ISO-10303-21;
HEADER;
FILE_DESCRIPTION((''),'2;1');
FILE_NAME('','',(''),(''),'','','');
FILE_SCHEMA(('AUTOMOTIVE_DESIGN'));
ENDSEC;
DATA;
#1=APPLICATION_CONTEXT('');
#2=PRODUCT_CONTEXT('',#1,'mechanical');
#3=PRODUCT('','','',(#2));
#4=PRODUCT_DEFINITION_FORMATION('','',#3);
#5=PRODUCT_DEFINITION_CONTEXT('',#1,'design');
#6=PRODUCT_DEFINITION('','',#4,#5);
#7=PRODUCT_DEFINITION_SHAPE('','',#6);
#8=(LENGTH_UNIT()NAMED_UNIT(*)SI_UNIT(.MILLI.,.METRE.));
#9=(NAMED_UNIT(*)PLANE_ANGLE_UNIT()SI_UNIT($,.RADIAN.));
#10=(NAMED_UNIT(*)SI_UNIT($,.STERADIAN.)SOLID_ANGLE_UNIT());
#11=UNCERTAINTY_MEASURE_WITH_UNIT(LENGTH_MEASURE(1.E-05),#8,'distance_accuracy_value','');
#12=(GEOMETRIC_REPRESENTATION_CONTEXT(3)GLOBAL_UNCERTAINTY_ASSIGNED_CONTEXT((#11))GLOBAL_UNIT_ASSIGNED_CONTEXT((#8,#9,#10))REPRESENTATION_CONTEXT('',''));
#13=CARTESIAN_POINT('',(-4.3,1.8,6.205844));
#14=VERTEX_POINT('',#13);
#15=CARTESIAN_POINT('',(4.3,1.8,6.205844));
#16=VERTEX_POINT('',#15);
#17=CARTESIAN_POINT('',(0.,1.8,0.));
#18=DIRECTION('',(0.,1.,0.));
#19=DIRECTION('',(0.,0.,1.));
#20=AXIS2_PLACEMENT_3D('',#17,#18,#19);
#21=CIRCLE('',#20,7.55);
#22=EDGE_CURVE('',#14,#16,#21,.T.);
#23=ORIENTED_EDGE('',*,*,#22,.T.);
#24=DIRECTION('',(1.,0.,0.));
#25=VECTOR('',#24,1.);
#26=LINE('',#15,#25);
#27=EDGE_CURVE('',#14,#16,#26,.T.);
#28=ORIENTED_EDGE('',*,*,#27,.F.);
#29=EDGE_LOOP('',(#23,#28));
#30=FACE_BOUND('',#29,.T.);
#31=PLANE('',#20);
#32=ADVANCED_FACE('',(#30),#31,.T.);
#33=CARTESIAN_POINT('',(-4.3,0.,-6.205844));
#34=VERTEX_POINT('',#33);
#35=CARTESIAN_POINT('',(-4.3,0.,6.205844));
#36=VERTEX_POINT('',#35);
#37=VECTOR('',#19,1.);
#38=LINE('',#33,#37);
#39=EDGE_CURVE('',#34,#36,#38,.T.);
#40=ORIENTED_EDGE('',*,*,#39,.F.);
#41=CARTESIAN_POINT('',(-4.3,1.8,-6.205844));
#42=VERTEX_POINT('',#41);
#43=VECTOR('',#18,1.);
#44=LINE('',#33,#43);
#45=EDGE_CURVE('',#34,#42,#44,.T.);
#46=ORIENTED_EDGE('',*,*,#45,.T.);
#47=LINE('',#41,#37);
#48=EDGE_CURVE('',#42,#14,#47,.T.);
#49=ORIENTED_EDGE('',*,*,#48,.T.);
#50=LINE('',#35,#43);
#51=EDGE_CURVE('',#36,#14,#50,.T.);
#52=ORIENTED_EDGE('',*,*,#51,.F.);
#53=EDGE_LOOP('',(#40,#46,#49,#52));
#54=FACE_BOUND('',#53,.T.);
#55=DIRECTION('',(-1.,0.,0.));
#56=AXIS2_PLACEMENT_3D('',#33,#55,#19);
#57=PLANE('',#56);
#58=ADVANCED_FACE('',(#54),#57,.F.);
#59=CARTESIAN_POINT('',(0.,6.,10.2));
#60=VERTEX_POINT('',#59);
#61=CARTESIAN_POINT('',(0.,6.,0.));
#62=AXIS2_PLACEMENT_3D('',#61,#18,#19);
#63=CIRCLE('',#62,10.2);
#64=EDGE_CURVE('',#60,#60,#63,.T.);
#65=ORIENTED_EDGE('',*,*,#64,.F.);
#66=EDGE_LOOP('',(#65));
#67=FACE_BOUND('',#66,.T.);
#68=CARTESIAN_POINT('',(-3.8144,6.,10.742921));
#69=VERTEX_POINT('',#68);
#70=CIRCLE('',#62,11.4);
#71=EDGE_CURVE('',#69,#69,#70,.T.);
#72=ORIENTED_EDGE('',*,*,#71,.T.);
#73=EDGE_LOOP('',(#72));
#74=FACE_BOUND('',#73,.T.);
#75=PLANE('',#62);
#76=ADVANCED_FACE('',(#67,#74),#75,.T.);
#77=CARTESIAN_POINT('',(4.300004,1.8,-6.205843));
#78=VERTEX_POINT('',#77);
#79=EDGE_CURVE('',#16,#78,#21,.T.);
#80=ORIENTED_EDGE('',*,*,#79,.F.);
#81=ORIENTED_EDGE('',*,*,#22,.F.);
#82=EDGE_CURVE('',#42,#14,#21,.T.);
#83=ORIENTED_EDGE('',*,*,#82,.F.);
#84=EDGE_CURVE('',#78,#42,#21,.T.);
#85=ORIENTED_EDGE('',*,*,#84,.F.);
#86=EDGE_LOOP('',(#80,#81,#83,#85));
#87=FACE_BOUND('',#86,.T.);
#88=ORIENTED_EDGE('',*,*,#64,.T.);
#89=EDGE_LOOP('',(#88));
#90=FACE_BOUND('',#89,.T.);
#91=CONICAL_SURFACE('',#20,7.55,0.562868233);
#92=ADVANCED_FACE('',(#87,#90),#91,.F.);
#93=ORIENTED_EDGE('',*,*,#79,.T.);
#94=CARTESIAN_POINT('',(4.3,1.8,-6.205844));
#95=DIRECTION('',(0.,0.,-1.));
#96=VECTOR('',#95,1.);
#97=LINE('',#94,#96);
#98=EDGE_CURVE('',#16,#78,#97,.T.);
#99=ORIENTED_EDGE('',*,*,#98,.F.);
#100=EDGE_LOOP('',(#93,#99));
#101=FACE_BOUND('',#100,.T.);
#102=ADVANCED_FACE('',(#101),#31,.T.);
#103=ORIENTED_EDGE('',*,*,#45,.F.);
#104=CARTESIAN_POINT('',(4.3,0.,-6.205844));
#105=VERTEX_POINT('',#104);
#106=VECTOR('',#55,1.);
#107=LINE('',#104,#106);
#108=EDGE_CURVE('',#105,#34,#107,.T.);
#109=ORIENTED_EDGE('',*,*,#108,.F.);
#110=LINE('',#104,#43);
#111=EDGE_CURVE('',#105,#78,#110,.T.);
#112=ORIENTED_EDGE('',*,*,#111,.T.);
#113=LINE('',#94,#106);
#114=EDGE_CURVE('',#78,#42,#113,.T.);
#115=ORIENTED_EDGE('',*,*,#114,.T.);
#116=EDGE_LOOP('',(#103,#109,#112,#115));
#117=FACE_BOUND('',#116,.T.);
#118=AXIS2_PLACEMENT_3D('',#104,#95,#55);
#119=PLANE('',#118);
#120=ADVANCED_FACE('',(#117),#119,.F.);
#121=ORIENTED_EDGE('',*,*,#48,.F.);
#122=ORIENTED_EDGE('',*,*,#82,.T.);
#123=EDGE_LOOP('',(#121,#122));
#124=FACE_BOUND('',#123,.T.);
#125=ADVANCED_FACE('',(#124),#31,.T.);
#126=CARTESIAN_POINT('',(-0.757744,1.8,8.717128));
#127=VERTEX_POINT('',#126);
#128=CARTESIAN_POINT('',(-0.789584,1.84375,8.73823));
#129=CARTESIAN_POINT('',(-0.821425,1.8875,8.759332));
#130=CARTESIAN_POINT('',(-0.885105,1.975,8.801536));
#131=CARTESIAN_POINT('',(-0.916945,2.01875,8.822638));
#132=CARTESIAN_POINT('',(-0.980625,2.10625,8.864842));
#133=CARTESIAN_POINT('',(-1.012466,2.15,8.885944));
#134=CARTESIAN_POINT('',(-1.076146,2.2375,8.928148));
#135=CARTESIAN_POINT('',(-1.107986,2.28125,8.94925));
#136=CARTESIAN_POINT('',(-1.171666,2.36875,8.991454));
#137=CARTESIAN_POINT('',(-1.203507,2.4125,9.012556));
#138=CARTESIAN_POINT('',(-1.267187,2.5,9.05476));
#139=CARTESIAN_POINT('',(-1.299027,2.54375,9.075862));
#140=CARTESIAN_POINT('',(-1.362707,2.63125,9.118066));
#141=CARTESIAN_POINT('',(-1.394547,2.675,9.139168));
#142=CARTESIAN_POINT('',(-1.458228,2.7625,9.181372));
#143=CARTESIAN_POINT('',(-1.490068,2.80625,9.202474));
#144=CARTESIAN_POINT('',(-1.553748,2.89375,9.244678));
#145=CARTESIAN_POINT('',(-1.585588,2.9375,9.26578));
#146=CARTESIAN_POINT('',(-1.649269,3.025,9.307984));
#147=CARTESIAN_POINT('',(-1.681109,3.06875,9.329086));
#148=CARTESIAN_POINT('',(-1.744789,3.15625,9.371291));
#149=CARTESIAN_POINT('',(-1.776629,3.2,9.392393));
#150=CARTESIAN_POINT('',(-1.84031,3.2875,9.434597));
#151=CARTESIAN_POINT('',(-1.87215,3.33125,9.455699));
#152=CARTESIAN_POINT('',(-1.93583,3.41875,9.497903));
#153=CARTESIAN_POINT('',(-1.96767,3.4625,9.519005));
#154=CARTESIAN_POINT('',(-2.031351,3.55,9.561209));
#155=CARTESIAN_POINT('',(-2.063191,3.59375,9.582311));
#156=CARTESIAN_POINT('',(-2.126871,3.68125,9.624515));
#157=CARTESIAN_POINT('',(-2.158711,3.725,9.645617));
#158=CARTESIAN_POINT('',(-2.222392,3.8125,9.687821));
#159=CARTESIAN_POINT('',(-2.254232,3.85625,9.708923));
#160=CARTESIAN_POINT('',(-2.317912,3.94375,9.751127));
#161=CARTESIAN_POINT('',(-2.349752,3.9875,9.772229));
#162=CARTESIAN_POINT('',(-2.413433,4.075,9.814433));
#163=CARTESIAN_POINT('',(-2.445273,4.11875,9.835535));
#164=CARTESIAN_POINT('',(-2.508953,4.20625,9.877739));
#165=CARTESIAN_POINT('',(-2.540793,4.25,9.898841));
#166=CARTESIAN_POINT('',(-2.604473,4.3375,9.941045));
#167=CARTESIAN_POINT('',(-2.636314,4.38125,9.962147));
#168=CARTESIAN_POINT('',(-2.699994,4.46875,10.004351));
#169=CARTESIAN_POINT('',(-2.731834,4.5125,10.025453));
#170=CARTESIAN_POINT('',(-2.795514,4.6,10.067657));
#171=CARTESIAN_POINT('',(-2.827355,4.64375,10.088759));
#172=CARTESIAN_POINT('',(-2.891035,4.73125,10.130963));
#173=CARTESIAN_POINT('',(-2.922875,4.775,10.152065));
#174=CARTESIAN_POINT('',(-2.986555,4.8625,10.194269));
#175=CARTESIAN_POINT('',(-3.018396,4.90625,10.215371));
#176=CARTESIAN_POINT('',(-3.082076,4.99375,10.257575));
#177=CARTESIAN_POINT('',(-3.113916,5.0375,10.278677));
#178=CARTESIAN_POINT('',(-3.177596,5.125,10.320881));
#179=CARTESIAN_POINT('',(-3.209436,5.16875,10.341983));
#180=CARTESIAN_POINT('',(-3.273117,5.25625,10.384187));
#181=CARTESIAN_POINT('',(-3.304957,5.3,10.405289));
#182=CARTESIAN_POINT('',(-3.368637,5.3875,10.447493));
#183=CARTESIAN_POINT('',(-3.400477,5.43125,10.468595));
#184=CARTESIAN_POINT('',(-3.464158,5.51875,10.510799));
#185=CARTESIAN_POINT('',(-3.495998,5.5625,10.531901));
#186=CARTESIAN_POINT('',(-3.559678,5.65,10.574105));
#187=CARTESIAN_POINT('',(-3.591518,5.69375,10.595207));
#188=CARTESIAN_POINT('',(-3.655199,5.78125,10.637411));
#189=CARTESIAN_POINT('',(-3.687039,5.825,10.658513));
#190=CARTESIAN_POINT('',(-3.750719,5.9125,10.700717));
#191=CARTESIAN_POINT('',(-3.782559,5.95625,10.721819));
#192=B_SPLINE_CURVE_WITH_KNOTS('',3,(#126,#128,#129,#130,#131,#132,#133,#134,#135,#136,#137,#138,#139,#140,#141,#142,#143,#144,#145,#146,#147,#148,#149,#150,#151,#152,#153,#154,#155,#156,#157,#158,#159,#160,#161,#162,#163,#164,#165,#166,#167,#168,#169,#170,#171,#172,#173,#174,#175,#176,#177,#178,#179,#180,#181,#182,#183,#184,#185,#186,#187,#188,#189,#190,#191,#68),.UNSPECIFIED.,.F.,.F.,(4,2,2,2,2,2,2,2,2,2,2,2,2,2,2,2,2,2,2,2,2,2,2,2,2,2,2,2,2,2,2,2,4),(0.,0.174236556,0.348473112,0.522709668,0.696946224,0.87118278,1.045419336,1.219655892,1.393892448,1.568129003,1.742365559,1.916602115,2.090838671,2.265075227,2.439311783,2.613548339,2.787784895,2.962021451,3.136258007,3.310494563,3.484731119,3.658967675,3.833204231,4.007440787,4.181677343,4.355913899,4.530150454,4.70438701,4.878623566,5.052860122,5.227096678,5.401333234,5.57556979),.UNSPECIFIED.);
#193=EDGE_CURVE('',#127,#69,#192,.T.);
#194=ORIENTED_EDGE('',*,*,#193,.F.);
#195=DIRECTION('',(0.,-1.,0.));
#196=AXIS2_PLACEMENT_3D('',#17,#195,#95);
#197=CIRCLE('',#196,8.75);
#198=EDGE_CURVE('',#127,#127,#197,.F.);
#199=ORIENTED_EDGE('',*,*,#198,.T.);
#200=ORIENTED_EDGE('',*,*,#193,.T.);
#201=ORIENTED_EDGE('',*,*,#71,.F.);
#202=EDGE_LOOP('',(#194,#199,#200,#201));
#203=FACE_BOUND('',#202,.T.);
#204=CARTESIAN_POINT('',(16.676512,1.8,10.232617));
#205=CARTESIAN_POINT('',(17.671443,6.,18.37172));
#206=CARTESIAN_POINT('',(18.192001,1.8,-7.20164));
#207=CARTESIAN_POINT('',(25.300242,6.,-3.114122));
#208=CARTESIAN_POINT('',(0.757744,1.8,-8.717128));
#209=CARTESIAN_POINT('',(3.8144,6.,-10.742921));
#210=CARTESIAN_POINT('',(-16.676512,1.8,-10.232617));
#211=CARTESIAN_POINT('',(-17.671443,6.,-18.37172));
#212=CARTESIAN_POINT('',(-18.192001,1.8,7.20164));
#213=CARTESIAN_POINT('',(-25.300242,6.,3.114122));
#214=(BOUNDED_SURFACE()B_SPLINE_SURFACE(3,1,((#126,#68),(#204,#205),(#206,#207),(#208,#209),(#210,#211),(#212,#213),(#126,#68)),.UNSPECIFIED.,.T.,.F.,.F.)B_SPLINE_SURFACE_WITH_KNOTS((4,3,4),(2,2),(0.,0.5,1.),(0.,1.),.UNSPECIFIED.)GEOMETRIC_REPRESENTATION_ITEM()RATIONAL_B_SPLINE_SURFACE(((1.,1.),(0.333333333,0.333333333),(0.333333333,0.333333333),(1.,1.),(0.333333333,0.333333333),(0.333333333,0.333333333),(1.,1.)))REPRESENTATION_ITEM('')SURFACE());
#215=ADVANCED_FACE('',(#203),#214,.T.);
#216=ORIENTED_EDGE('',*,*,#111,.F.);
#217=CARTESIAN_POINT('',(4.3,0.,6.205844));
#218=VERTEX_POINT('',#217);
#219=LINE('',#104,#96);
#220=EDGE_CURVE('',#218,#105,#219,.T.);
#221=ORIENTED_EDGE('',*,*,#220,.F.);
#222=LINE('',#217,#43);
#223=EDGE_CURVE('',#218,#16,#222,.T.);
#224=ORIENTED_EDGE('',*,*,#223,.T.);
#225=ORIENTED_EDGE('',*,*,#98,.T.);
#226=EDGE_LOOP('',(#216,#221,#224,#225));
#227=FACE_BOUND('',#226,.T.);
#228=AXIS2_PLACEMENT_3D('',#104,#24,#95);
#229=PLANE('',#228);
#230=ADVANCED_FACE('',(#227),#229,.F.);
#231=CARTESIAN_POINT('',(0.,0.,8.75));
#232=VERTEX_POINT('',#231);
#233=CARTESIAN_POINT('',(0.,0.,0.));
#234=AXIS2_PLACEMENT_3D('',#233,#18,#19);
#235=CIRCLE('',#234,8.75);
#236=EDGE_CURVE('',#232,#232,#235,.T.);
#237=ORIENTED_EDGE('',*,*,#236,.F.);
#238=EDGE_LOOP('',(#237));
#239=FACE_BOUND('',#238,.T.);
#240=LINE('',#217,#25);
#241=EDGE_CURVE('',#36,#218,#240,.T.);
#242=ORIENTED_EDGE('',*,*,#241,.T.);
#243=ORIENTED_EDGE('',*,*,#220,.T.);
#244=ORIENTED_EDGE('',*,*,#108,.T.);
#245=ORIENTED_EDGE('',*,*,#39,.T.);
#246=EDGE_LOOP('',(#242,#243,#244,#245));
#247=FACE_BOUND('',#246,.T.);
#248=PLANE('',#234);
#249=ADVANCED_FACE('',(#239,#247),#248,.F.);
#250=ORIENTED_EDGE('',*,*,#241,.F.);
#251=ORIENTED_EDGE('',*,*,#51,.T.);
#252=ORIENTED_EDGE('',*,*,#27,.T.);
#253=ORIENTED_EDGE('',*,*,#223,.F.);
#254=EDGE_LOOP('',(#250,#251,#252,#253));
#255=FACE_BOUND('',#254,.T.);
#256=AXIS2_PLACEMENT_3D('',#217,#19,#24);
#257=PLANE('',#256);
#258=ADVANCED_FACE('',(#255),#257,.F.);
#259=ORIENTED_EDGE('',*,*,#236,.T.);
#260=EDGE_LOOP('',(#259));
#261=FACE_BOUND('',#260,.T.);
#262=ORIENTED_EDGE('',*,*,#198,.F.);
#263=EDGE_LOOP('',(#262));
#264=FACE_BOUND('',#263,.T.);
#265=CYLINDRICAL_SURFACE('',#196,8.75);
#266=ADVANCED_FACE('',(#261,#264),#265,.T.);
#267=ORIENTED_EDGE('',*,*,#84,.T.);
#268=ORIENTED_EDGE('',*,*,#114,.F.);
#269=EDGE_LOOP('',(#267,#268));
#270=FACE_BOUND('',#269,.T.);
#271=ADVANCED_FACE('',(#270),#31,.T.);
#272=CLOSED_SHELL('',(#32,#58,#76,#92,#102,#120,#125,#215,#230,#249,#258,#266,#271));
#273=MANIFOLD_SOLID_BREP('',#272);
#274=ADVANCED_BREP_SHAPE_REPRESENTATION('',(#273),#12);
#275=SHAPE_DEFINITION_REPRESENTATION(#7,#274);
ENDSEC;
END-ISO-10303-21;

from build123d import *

# Parameters (mm, degrees)
SKETCH1_R           = 8.75
BOSS_EXTRUDE1_DEPTH = 1.8
SKETCH2_76_R        = 7.55
SKETCH3_51_R        = 10.2
SKETCH4_W           = 8.6
SKETCH4_H           = 12.41168804
CUT_EXTRUDE1_DEPTH  = 17.660132214


with BuildPart() as part:
    # Sketch1 → Boss-Extrude1 (new body)
    with BuildSketch(Plane(origin=(0, 0, 0), x_dir=(1, 0, 0), z_dir=(0, 1, 0))):
        with Locations(Location((0, 0, 0), (0, 0, 270))):
            Circle(SKETCH1_R)
    extrude(amount=BOSS_EXTRUDE1_DEPTH)

    # Loft1: read off the stored shape, not the designer's step
    # Loft1: loft between two sections, ruled curve by curve
    loft1_from = [
        Edge.make_bspline([(-0.757744305, 1.8, 8.717128172), (16.67651204, 1.8, 10.232616781), (18.192000649, 1.8, -7.201639563), (0.757744305, 1.8, -8.717128172), (-16.67651204, 1.8, -10.232616781), (-18.192000649, 1.8, 7.201639563), (-0.757744305, 1.8, 8.717128172)], [0, 0, 0, 0, 0.5, 0.5, 0.5, 1, 1, 1, 1], 3, [1, 0.333333333, 0.333333333, 1, 0.333333333, 0.333333333, 1]),
    ]
    loft1_to = [
        Edge.make_bspline([(-3.814399501, 6, 10.742921225), (17.671442948, 6, 18.371720228), (25.300241951, 6, -3.114122222), (3.814399501, 6, -10.742921225), (-17.671442948, 6, -18.371720228), (-25.300241951, 6, 3.114122222), (-3.814399501, 6, 10.742921225)], [0, 0, 0, 0, 0.5, 0.5, 0.5, 1, 1, 1, 1], 3, [1, 0.333333333, 0.333333333, 1, 0.333333333, 0.333333333, 1]),
    ]
    loft1 = Solid(Shell([*[Face.make_surface_from_curves(loft1_from[k], loft1_to[k]) for k in range(1)], Face(Wire(loft1_from)), Face(Wire(loft1_to))]))
    add(loft1)

    # Sketch2<76> → Cut-Loft1 section 0
    with BuildSketch(Plane(origin=(0, 1.8, 0), x_dir=(1, 0, 0), z_dir=(0, 1, 0))):
        Circle(SKETCH2_76_R)
    # Sketch3<51> → Cut-Loft1 section 1
    with BuildSketch(Plane(origin=(0, 6, 0), x_dir=(1, 0, 0), z_dir=(0, 1, 0))):
        Circle(SKETCH3_51_R)
    loft(mode=Mode.SUBTRACT)

    # Sketch4 → Cut-Extrude1 (cut, through all)
    with BuildSketch(Plane(origin=(0, 1.8, 0), x_dir=(1, 0, 0), z_dir=(0, 1, 0))):
        Rectangle(SKETCH4_W, SKETCH4_H)
    extrude(amount=-CUT_EXTRUDE1_DEPTH, mode=Mode.SUBTRACT)


solid = part.part
